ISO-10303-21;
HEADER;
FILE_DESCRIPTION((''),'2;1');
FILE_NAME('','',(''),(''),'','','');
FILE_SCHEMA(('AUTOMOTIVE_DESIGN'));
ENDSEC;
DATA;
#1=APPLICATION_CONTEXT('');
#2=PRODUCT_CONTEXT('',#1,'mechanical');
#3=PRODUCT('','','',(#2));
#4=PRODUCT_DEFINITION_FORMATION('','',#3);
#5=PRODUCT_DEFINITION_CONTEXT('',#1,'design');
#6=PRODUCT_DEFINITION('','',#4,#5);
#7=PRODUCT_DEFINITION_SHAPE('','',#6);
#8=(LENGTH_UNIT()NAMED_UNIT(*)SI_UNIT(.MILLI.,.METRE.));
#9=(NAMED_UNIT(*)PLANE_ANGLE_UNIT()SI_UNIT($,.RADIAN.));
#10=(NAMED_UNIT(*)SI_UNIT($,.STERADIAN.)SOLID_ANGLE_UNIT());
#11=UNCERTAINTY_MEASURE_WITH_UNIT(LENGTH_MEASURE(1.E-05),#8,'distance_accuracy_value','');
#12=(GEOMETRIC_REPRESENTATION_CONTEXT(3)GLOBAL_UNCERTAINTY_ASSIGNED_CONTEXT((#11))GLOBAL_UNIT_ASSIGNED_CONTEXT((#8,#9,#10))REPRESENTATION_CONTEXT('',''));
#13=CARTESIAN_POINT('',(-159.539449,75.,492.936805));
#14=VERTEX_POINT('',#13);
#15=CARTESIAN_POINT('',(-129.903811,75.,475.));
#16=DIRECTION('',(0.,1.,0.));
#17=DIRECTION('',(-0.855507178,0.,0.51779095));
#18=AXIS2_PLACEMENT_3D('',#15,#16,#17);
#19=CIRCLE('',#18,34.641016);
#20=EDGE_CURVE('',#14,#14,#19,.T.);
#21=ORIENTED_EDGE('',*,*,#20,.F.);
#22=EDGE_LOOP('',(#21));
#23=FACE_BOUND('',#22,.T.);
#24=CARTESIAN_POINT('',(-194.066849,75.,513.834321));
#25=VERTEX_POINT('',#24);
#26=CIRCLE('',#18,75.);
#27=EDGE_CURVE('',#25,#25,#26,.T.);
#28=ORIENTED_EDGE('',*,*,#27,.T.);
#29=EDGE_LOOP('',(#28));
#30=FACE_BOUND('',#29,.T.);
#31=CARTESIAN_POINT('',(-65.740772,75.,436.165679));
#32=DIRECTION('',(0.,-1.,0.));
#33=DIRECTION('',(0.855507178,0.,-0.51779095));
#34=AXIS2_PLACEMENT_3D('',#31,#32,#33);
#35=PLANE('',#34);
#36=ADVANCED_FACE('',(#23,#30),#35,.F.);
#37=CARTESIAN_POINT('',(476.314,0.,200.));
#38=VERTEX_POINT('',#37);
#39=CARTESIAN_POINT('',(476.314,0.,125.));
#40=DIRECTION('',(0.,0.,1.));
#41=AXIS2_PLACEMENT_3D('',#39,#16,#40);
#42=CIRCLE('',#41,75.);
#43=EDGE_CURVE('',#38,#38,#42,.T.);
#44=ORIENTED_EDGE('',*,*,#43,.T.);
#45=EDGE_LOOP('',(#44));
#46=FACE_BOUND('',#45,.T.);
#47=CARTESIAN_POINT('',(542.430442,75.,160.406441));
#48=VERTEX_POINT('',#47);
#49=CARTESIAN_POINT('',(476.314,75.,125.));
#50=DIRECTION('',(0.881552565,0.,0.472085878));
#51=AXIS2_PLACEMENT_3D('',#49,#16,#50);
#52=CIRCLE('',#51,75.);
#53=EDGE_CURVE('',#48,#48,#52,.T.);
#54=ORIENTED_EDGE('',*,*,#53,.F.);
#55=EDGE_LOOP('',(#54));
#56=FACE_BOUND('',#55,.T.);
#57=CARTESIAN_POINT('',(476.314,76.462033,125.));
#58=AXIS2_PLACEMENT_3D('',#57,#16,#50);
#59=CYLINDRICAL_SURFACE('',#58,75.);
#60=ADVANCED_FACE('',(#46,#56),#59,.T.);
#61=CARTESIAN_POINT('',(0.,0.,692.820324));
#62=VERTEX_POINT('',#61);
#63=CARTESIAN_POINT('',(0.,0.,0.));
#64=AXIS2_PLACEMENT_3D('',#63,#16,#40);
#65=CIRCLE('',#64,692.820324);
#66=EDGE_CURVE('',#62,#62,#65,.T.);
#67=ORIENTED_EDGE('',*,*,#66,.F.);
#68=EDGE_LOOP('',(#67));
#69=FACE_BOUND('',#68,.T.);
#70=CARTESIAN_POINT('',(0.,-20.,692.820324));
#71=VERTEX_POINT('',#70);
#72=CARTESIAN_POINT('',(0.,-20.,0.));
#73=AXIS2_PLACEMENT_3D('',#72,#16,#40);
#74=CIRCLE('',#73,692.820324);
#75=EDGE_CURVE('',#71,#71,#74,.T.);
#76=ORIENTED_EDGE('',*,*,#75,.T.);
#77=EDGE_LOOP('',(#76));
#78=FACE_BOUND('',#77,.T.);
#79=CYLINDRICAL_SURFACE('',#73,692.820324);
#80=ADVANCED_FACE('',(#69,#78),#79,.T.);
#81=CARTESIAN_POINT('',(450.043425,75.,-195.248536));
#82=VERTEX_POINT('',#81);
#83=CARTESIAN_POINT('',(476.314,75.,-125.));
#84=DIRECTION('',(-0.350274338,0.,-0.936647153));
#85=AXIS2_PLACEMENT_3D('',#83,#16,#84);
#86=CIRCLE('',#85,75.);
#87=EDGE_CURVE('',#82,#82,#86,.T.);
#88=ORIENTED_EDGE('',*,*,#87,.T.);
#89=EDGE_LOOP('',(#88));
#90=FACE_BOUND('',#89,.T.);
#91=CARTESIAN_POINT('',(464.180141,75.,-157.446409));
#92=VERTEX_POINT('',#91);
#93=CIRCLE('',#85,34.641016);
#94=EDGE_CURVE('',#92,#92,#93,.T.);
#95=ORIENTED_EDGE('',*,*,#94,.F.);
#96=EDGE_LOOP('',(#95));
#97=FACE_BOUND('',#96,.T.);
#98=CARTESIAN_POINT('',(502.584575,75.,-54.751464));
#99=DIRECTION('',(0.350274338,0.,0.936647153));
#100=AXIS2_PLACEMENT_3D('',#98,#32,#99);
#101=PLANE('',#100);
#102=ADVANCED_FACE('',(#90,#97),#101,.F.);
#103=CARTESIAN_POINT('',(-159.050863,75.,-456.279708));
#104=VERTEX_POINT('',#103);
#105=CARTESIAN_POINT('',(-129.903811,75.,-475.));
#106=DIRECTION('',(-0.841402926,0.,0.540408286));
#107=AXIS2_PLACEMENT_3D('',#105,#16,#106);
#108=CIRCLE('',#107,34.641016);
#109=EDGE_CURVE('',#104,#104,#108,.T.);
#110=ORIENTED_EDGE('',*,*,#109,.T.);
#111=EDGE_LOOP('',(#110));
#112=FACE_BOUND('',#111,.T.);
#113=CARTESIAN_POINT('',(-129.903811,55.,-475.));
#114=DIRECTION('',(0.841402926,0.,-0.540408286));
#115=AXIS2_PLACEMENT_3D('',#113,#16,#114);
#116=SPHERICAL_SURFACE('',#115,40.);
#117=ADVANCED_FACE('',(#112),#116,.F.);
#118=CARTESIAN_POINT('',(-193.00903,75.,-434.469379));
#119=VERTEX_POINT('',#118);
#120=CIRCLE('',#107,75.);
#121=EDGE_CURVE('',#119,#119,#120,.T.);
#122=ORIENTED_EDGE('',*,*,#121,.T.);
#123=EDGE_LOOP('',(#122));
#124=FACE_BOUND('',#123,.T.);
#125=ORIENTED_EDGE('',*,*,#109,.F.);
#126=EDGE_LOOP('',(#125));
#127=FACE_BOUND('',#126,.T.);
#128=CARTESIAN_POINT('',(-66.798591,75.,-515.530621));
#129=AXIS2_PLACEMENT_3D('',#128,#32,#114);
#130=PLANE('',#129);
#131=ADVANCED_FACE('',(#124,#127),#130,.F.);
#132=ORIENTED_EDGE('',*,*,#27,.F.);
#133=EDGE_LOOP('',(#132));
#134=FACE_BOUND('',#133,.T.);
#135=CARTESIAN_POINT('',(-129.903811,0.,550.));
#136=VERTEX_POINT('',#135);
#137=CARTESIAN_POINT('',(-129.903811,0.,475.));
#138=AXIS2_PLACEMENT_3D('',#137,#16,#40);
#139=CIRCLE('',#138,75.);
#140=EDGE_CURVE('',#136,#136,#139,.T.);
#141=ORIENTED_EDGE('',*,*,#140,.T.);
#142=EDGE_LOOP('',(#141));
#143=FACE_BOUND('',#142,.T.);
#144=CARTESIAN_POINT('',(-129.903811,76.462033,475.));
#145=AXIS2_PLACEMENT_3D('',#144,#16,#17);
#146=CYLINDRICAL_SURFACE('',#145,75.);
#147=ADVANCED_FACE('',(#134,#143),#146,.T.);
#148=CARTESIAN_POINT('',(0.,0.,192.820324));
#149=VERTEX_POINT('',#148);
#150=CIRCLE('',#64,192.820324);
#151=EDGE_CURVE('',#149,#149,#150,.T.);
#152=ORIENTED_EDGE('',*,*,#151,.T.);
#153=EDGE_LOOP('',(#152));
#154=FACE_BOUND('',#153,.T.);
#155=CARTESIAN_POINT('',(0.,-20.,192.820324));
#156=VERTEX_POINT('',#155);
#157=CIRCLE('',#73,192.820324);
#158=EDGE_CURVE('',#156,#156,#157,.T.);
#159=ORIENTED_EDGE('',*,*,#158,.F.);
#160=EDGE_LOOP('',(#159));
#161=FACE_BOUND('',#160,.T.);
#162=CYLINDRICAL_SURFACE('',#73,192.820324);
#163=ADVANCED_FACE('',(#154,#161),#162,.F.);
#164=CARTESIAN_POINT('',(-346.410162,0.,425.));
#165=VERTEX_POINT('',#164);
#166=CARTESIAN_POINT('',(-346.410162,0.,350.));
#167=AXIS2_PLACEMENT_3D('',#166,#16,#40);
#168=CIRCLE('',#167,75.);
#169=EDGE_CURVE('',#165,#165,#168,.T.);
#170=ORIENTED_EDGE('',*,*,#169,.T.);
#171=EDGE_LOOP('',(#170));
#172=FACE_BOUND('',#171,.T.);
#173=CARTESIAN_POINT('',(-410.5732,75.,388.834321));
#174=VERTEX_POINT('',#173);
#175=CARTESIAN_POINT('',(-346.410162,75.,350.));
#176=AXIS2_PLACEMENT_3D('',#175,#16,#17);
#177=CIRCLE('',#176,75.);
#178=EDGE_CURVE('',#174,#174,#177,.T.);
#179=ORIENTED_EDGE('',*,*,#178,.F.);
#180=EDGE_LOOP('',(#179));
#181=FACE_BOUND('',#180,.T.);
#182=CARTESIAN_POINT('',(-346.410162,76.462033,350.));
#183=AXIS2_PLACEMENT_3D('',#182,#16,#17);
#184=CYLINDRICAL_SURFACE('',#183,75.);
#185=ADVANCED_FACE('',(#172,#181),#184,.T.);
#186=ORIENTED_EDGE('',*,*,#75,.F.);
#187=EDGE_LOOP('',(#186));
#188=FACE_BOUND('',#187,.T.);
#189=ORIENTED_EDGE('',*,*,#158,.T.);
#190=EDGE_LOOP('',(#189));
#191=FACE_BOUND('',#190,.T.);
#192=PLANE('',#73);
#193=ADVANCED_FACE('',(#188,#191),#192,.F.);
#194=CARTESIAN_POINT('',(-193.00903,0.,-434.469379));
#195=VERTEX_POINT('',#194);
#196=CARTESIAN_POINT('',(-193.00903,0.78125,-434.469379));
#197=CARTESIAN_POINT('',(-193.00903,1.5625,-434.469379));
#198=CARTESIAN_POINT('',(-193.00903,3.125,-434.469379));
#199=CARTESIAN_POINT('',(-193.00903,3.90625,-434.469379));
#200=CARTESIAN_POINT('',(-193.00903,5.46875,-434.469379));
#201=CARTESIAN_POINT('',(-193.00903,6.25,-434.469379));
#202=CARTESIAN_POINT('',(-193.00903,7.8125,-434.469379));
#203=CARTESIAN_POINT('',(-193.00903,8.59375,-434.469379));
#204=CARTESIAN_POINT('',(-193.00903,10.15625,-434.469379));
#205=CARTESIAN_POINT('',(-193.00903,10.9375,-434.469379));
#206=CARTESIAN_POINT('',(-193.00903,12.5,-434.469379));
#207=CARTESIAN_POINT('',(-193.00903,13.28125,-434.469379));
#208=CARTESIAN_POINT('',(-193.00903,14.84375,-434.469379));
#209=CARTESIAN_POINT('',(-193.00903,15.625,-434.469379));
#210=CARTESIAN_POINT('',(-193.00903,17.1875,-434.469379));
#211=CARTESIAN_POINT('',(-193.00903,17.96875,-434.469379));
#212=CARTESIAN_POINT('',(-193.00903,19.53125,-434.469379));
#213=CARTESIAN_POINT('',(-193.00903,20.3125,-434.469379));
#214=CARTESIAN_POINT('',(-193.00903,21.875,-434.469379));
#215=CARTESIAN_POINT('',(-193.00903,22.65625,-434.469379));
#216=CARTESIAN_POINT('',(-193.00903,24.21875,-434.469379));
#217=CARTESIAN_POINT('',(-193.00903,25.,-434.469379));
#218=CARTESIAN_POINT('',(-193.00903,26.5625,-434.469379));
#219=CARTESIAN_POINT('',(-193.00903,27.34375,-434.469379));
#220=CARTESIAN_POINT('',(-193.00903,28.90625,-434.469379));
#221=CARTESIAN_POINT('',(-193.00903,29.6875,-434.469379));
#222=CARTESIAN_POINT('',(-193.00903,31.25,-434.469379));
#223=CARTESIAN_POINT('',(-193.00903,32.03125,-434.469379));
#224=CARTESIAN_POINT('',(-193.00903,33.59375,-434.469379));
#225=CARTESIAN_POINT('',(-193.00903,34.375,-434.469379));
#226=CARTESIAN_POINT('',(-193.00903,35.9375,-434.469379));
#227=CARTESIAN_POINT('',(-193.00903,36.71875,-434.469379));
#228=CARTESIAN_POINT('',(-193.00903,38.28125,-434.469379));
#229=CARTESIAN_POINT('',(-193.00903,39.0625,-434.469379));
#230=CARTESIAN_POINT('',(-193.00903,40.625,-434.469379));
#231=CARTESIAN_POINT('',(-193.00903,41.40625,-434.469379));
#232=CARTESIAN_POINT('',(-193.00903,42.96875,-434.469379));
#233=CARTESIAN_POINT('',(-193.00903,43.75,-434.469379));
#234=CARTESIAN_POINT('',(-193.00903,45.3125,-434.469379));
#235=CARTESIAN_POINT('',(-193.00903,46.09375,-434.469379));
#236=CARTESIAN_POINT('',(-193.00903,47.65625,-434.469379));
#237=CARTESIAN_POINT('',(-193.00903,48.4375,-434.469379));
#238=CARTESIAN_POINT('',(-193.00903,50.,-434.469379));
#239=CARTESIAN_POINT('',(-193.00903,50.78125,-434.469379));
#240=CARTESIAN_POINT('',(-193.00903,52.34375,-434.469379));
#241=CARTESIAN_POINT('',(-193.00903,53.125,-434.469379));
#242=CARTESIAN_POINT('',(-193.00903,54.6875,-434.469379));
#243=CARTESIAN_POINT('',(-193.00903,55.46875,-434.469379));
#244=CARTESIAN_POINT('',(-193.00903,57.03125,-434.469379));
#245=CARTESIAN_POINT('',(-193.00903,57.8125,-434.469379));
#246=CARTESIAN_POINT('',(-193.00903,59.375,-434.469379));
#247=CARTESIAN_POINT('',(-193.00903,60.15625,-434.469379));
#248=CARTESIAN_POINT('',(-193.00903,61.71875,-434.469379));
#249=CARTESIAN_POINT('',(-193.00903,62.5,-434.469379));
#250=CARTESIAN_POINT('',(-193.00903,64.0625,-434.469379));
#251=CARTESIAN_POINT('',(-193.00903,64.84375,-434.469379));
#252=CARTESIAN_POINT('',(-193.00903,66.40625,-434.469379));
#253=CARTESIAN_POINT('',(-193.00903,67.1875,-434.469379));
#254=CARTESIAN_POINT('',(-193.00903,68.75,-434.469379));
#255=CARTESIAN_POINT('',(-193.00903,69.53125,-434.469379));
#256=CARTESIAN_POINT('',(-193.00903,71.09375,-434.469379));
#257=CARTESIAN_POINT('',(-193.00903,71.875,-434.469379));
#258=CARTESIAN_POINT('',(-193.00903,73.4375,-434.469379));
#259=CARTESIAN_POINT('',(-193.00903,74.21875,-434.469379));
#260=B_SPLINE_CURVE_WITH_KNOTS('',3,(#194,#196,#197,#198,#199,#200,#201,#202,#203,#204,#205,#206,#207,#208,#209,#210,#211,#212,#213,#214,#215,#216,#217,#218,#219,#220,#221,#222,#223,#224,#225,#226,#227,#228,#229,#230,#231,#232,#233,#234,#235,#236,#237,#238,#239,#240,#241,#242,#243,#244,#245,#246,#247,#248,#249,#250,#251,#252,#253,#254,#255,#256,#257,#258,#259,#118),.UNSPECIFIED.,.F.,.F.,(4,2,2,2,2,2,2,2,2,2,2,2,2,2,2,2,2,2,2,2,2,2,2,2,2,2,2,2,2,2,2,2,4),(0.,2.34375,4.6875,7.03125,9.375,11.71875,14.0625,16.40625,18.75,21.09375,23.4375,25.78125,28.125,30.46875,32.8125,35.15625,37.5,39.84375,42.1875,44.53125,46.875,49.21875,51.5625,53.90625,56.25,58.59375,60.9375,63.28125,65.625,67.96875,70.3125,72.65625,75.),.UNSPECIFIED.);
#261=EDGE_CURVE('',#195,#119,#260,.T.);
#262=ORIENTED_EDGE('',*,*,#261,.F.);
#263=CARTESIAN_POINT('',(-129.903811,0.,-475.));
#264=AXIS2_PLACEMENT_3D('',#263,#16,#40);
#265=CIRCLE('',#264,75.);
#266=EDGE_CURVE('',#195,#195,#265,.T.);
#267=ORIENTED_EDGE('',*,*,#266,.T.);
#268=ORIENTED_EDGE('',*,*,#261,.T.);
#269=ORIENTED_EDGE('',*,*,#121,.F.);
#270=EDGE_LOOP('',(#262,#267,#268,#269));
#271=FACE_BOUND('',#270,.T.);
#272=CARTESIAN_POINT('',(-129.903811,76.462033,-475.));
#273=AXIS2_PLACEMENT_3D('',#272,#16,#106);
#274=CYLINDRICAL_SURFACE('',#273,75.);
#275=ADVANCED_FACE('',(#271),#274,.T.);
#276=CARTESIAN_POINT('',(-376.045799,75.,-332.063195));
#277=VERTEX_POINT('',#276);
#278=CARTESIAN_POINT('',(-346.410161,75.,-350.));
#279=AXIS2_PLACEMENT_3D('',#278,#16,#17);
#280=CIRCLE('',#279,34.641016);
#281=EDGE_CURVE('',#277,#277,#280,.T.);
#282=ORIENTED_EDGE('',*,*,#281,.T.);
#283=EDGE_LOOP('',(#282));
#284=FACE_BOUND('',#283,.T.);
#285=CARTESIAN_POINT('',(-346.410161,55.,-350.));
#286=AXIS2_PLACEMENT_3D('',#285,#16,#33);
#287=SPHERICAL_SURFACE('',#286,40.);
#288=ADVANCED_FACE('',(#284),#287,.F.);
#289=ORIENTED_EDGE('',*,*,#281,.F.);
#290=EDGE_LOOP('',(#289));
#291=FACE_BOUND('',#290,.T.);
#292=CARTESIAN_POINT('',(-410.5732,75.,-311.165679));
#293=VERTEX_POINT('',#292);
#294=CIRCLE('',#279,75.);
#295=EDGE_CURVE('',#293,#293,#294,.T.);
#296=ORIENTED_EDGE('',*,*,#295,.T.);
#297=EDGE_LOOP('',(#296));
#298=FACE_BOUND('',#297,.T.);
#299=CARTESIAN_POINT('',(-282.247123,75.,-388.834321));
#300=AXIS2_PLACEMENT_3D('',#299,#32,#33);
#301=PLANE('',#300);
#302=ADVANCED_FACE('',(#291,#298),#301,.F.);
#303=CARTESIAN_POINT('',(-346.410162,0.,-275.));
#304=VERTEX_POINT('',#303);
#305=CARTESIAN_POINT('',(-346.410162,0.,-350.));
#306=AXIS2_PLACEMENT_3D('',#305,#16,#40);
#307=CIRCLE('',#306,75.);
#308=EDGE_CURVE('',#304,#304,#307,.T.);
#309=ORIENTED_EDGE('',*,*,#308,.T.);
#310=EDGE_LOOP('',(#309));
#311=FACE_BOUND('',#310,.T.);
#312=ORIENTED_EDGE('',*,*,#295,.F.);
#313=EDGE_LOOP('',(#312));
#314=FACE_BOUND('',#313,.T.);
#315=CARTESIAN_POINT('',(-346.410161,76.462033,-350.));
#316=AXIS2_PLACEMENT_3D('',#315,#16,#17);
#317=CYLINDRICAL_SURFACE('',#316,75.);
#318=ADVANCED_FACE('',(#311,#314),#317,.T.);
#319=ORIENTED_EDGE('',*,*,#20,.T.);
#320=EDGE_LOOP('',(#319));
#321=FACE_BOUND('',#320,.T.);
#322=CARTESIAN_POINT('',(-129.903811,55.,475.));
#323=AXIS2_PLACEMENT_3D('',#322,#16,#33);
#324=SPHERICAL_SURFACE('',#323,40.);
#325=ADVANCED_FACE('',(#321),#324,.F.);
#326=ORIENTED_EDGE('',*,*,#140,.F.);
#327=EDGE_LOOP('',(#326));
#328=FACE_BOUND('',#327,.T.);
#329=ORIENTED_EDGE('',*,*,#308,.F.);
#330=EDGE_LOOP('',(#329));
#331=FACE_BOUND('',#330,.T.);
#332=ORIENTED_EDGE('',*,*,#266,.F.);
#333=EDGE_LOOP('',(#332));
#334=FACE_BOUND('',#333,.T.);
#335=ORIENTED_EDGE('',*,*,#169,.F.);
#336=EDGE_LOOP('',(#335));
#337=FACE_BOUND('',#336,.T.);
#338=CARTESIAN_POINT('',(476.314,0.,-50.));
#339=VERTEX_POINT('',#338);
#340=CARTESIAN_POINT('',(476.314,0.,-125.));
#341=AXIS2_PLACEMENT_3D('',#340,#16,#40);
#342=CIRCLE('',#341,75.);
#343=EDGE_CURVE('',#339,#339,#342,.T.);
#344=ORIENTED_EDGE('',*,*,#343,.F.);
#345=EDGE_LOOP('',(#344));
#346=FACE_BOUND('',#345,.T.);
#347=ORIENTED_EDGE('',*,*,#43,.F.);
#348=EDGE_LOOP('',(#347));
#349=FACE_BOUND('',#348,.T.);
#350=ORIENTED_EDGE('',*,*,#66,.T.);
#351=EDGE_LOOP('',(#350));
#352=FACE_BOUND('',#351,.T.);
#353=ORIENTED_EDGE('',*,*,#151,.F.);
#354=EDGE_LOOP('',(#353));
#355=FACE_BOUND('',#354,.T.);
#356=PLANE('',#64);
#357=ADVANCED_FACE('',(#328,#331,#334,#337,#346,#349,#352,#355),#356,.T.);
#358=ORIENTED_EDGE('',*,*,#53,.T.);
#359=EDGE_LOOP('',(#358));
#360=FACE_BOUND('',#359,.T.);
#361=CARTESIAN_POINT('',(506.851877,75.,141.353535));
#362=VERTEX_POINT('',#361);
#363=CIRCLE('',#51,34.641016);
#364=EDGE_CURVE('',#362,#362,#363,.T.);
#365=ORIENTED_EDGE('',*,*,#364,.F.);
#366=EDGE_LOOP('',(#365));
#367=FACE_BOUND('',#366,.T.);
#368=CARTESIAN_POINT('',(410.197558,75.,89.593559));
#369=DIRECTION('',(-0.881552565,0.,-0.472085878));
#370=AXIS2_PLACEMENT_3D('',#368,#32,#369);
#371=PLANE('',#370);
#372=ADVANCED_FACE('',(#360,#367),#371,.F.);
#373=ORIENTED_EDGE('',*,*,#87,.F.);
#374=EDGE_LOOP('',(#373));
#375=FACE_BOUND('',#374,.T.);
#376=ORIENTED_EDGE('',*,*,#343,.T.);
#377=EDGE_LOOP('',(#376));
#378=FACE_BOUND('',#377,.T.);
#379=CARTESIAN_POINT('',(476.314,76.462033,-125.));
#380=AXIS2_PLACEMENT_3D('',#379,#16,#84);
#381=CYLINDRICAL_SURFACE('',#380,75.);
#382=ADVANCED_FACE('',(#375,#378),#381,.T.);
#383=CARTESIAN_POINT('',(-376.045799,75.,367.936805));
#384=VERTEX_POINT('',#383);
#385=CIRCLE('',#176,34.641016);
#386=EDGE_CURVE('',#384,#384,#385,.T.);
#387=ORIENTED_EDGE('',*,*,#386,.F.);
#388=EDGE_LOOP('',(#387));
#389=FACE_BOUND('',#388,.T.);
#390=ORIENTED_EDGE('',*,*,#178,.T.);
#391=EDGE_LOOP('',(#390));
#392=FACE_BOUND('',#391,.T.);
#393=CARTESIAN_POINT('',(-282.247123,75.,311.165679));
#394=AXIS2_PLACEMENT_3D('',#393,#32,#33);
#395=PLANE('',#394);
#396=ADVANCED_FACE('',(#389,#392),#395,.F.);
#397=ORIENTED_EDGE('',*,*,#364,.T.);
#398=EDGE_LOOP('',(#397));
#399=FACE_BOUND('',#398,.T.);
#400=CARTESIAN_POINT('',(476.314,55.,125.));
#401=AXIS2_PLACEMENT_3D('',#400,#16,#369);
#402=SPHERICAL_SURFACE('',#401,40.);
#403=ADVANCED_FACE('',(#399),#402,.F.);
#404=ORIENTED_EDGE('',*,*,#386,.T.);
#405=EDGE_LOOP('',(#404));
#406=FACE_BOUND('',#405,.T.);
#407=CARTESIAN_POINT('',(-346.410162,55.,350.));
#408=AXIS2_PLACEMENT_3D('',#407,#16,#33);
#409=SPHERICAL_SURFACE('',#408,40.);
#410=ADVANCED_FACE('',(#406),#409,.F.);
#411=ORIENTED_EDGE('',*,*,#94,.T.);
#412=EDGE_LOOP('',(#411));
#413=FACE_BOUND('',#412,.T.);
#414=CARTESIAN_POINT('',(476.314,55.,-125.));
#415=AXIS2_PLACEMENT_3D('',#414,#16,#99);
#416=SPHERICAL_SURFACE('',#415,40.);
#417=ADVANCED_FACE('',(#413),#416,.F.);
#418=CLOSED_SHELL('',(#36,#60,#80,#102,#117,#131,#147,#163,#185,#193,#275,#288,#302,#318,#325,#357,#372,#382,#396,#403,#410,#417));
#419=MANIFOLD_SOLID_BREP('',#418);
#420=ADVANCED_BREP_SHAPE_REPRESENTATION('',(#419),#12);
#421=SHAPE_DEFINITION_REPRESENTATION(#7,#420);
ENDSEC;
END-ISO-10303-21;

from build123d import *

# Parameters (mm, degrees)
SKETCH1_R          = 692.820324
SKETCH1_R_2        = 192.820324
EXTRUDE1_DEPTH     = 20
SKETCH2_R          = 75
CUT_EXTRUDE1_DEPTH = 10


# Read off the part's stored shape, not the designer's step: 连接重组1
with BuildPart() as part:
    # Sketch1 → Extrude1 (new body)
    with BuildSketch(Plane(origin=(0, 0, 0), x_dir=(1, 0, 0), z_dir=(0, 1, 0))):
        with Locations(Location((0, 0, 0), (0, 0, 270))):
            Circle(SKETCH1_R)
        with Locations(Location((0, 0, 0), (0, 0, 270))):
            Circle(SKETCH1_R_2, mode=Mode.SUBTRACT)
    extrude(amount=-EXTRUDE1_DEPTH)

    # Sketch2 → Cut-Extrude1 (cut)
    with BuildSketch(Plane(origin=(0, 0, 0), x_dir=(1, 0, 0), z_dir=(0, 1, 0))):
        with Locations(Location((-129.90381057, 475, 0), (0, 0, 270))):
            Circle(SKETCH2_R)
        with Locations(Location((-129.90381057, -475, 0), (0, 0, 270))):
            Circle(SKETCH2_R)
        with Locations(Location((476.314, -125, 0), (0, 0, 270))):
            Circle(SKETCH2_R)
        with Locations(Location((-346.4101615, 350, 0), (0, 0, 270))):
            Circle(SKETCH2_R)
        with Locations(Location((-346.4101615, -350, 0), (0, 0, 270))):
            Circle(SKETCH2_R)
        with Locations(Location((476.314, 125, 0), (0, 0, 270))):
            Circle(SKETCH2_R)
    extrude(amount=-CUT_EXTRUDE1_DEPTH, mode=Mode.SUBTRACT)

    # 连接重组1 outline → 连接重组1 (revolve)
    with BuildSketch(Plane(origin=(476.314, 0, 125), x_dir=(1, 0, 0), z_dir=(0, 0, 1))):
        with BuildLine():
            Line((75, 75), (34.641016131, 75.000000035))
            ThreePointArc((34.641016131, 75.000000035), (34.641016161, 35.000000018), (0, 15))
            Line((0, 15), (0, -10))
            Line((0, -10), (75, -10))
            Line((75, -10), (75, 75))
        make_face()
    revolve(axis=Axis((476.314, 0, 125), (0, 1, 0)))

    # Other 1 2 outline → Other 1 2 (revolve)
    with BuildSketch(Plane(origin=(-129.90381057, 0, 475), x_dir=(1, 0, 0), z_dir=(0, 0, 1))):
        with BuildLine():
            Line((75, 75), (34.641016131, 75.000000035))
            ThreePointArc((34.641016131, 75.000000035), (34.641016161, 35.000000018), (0, 15))
            Line((0, 15), (0, -10))
            Line((0, -10), (75, -10))
            Line((75, -10), (75, 75))
        make_face()
    revolve(axis=Axis((-129.90381057, 0, 475), (0, 1, 0)))

    # Other 1 3 outline → Other 1 3 (revolve)
    with BuildSketch(Plane(origin=(-346.4101615, 0, -350), x_dir=(1, 0, 0), z_dir=(0, 0, 1))):
        with BuildLine():
            Line((75, 75), (34.641016131, 75.000000035))
            ThreePointArc((34.641016131, 75.000000035), (34.641016161, 35.000000018), (0, 15))
            Line((0, 15), (0, -10))
            Line((0, -10), (75, -10))
            Line((75, -10), (75, 75))
        make_face()
    revolve(axis=Axis((-346.4101615, 0, -350), (0, 1, 0)))

    # Other 1 4 outline → Other 1 4 (revolve)
    with BuildSketch(Plane(origin=(-129.90381057, 0, -475), x_dir=(1, 0, 0), z_dir=(0, 0, 1))):
        with BuildLine():
            Line((75, 75), (34.641016131, 75.000000035))
            ThreePointArc((34.641016131, 75.000000035), (34.641016161, 35.000000018), (0, 15))
            Line((0, 15), (0, -10))
            Line((0, -10), (75, -10))
            Line((75, -10), (75, 75))
        make_face()
    revolve(axis=Axis((-129.90381057, 0, -475), (0, 1, 0)))

    # Other 1 5 outline → Other 1 5 (revolve)
    with BuildSketch(Plane(origin=(-346.4101615, 0, 350), x_dir=(1, 0, 0), z_dir=(0, 0, 1))):
        with BuildLine():
            Line((75, 75), (34.641016131, 75.000000035))
            ThreePointArc((34.641016131, 75.000000035), (34.641016161, 35.000000018), (0, 15))
            Line((0, 15), (0, -10))
            Line((0, -10), (75, -10))
            Line((75, -10), (75, 75))
        make_face()
    revolve(axis=Axis((-346.4101615, 0, 350), (0, 1, 0)))

    # Other 1 6 outline → Other 1 6 (revolve)
    with BuildSketch(Plane(origin=(476.314, 0, -125), x_dir=(1, 0, 0), z_dir=(0, 0, 1))):
        with BuildLine():
            Line((75, 75), (34.641016131, 75.000000035))
            ThreePointArc((34.641016131, 75.000000035), (34.641016161, 35.000000018), (0, 15))
            Line((0, 15), (0, -10))
            Line((0, -10), (75, -10))
            Line((75, -10), (75, 75))
        make_face()
    revolve(axis=Axis((476.314, 0, -125), (0, 1, 0)))


solid = part.part
